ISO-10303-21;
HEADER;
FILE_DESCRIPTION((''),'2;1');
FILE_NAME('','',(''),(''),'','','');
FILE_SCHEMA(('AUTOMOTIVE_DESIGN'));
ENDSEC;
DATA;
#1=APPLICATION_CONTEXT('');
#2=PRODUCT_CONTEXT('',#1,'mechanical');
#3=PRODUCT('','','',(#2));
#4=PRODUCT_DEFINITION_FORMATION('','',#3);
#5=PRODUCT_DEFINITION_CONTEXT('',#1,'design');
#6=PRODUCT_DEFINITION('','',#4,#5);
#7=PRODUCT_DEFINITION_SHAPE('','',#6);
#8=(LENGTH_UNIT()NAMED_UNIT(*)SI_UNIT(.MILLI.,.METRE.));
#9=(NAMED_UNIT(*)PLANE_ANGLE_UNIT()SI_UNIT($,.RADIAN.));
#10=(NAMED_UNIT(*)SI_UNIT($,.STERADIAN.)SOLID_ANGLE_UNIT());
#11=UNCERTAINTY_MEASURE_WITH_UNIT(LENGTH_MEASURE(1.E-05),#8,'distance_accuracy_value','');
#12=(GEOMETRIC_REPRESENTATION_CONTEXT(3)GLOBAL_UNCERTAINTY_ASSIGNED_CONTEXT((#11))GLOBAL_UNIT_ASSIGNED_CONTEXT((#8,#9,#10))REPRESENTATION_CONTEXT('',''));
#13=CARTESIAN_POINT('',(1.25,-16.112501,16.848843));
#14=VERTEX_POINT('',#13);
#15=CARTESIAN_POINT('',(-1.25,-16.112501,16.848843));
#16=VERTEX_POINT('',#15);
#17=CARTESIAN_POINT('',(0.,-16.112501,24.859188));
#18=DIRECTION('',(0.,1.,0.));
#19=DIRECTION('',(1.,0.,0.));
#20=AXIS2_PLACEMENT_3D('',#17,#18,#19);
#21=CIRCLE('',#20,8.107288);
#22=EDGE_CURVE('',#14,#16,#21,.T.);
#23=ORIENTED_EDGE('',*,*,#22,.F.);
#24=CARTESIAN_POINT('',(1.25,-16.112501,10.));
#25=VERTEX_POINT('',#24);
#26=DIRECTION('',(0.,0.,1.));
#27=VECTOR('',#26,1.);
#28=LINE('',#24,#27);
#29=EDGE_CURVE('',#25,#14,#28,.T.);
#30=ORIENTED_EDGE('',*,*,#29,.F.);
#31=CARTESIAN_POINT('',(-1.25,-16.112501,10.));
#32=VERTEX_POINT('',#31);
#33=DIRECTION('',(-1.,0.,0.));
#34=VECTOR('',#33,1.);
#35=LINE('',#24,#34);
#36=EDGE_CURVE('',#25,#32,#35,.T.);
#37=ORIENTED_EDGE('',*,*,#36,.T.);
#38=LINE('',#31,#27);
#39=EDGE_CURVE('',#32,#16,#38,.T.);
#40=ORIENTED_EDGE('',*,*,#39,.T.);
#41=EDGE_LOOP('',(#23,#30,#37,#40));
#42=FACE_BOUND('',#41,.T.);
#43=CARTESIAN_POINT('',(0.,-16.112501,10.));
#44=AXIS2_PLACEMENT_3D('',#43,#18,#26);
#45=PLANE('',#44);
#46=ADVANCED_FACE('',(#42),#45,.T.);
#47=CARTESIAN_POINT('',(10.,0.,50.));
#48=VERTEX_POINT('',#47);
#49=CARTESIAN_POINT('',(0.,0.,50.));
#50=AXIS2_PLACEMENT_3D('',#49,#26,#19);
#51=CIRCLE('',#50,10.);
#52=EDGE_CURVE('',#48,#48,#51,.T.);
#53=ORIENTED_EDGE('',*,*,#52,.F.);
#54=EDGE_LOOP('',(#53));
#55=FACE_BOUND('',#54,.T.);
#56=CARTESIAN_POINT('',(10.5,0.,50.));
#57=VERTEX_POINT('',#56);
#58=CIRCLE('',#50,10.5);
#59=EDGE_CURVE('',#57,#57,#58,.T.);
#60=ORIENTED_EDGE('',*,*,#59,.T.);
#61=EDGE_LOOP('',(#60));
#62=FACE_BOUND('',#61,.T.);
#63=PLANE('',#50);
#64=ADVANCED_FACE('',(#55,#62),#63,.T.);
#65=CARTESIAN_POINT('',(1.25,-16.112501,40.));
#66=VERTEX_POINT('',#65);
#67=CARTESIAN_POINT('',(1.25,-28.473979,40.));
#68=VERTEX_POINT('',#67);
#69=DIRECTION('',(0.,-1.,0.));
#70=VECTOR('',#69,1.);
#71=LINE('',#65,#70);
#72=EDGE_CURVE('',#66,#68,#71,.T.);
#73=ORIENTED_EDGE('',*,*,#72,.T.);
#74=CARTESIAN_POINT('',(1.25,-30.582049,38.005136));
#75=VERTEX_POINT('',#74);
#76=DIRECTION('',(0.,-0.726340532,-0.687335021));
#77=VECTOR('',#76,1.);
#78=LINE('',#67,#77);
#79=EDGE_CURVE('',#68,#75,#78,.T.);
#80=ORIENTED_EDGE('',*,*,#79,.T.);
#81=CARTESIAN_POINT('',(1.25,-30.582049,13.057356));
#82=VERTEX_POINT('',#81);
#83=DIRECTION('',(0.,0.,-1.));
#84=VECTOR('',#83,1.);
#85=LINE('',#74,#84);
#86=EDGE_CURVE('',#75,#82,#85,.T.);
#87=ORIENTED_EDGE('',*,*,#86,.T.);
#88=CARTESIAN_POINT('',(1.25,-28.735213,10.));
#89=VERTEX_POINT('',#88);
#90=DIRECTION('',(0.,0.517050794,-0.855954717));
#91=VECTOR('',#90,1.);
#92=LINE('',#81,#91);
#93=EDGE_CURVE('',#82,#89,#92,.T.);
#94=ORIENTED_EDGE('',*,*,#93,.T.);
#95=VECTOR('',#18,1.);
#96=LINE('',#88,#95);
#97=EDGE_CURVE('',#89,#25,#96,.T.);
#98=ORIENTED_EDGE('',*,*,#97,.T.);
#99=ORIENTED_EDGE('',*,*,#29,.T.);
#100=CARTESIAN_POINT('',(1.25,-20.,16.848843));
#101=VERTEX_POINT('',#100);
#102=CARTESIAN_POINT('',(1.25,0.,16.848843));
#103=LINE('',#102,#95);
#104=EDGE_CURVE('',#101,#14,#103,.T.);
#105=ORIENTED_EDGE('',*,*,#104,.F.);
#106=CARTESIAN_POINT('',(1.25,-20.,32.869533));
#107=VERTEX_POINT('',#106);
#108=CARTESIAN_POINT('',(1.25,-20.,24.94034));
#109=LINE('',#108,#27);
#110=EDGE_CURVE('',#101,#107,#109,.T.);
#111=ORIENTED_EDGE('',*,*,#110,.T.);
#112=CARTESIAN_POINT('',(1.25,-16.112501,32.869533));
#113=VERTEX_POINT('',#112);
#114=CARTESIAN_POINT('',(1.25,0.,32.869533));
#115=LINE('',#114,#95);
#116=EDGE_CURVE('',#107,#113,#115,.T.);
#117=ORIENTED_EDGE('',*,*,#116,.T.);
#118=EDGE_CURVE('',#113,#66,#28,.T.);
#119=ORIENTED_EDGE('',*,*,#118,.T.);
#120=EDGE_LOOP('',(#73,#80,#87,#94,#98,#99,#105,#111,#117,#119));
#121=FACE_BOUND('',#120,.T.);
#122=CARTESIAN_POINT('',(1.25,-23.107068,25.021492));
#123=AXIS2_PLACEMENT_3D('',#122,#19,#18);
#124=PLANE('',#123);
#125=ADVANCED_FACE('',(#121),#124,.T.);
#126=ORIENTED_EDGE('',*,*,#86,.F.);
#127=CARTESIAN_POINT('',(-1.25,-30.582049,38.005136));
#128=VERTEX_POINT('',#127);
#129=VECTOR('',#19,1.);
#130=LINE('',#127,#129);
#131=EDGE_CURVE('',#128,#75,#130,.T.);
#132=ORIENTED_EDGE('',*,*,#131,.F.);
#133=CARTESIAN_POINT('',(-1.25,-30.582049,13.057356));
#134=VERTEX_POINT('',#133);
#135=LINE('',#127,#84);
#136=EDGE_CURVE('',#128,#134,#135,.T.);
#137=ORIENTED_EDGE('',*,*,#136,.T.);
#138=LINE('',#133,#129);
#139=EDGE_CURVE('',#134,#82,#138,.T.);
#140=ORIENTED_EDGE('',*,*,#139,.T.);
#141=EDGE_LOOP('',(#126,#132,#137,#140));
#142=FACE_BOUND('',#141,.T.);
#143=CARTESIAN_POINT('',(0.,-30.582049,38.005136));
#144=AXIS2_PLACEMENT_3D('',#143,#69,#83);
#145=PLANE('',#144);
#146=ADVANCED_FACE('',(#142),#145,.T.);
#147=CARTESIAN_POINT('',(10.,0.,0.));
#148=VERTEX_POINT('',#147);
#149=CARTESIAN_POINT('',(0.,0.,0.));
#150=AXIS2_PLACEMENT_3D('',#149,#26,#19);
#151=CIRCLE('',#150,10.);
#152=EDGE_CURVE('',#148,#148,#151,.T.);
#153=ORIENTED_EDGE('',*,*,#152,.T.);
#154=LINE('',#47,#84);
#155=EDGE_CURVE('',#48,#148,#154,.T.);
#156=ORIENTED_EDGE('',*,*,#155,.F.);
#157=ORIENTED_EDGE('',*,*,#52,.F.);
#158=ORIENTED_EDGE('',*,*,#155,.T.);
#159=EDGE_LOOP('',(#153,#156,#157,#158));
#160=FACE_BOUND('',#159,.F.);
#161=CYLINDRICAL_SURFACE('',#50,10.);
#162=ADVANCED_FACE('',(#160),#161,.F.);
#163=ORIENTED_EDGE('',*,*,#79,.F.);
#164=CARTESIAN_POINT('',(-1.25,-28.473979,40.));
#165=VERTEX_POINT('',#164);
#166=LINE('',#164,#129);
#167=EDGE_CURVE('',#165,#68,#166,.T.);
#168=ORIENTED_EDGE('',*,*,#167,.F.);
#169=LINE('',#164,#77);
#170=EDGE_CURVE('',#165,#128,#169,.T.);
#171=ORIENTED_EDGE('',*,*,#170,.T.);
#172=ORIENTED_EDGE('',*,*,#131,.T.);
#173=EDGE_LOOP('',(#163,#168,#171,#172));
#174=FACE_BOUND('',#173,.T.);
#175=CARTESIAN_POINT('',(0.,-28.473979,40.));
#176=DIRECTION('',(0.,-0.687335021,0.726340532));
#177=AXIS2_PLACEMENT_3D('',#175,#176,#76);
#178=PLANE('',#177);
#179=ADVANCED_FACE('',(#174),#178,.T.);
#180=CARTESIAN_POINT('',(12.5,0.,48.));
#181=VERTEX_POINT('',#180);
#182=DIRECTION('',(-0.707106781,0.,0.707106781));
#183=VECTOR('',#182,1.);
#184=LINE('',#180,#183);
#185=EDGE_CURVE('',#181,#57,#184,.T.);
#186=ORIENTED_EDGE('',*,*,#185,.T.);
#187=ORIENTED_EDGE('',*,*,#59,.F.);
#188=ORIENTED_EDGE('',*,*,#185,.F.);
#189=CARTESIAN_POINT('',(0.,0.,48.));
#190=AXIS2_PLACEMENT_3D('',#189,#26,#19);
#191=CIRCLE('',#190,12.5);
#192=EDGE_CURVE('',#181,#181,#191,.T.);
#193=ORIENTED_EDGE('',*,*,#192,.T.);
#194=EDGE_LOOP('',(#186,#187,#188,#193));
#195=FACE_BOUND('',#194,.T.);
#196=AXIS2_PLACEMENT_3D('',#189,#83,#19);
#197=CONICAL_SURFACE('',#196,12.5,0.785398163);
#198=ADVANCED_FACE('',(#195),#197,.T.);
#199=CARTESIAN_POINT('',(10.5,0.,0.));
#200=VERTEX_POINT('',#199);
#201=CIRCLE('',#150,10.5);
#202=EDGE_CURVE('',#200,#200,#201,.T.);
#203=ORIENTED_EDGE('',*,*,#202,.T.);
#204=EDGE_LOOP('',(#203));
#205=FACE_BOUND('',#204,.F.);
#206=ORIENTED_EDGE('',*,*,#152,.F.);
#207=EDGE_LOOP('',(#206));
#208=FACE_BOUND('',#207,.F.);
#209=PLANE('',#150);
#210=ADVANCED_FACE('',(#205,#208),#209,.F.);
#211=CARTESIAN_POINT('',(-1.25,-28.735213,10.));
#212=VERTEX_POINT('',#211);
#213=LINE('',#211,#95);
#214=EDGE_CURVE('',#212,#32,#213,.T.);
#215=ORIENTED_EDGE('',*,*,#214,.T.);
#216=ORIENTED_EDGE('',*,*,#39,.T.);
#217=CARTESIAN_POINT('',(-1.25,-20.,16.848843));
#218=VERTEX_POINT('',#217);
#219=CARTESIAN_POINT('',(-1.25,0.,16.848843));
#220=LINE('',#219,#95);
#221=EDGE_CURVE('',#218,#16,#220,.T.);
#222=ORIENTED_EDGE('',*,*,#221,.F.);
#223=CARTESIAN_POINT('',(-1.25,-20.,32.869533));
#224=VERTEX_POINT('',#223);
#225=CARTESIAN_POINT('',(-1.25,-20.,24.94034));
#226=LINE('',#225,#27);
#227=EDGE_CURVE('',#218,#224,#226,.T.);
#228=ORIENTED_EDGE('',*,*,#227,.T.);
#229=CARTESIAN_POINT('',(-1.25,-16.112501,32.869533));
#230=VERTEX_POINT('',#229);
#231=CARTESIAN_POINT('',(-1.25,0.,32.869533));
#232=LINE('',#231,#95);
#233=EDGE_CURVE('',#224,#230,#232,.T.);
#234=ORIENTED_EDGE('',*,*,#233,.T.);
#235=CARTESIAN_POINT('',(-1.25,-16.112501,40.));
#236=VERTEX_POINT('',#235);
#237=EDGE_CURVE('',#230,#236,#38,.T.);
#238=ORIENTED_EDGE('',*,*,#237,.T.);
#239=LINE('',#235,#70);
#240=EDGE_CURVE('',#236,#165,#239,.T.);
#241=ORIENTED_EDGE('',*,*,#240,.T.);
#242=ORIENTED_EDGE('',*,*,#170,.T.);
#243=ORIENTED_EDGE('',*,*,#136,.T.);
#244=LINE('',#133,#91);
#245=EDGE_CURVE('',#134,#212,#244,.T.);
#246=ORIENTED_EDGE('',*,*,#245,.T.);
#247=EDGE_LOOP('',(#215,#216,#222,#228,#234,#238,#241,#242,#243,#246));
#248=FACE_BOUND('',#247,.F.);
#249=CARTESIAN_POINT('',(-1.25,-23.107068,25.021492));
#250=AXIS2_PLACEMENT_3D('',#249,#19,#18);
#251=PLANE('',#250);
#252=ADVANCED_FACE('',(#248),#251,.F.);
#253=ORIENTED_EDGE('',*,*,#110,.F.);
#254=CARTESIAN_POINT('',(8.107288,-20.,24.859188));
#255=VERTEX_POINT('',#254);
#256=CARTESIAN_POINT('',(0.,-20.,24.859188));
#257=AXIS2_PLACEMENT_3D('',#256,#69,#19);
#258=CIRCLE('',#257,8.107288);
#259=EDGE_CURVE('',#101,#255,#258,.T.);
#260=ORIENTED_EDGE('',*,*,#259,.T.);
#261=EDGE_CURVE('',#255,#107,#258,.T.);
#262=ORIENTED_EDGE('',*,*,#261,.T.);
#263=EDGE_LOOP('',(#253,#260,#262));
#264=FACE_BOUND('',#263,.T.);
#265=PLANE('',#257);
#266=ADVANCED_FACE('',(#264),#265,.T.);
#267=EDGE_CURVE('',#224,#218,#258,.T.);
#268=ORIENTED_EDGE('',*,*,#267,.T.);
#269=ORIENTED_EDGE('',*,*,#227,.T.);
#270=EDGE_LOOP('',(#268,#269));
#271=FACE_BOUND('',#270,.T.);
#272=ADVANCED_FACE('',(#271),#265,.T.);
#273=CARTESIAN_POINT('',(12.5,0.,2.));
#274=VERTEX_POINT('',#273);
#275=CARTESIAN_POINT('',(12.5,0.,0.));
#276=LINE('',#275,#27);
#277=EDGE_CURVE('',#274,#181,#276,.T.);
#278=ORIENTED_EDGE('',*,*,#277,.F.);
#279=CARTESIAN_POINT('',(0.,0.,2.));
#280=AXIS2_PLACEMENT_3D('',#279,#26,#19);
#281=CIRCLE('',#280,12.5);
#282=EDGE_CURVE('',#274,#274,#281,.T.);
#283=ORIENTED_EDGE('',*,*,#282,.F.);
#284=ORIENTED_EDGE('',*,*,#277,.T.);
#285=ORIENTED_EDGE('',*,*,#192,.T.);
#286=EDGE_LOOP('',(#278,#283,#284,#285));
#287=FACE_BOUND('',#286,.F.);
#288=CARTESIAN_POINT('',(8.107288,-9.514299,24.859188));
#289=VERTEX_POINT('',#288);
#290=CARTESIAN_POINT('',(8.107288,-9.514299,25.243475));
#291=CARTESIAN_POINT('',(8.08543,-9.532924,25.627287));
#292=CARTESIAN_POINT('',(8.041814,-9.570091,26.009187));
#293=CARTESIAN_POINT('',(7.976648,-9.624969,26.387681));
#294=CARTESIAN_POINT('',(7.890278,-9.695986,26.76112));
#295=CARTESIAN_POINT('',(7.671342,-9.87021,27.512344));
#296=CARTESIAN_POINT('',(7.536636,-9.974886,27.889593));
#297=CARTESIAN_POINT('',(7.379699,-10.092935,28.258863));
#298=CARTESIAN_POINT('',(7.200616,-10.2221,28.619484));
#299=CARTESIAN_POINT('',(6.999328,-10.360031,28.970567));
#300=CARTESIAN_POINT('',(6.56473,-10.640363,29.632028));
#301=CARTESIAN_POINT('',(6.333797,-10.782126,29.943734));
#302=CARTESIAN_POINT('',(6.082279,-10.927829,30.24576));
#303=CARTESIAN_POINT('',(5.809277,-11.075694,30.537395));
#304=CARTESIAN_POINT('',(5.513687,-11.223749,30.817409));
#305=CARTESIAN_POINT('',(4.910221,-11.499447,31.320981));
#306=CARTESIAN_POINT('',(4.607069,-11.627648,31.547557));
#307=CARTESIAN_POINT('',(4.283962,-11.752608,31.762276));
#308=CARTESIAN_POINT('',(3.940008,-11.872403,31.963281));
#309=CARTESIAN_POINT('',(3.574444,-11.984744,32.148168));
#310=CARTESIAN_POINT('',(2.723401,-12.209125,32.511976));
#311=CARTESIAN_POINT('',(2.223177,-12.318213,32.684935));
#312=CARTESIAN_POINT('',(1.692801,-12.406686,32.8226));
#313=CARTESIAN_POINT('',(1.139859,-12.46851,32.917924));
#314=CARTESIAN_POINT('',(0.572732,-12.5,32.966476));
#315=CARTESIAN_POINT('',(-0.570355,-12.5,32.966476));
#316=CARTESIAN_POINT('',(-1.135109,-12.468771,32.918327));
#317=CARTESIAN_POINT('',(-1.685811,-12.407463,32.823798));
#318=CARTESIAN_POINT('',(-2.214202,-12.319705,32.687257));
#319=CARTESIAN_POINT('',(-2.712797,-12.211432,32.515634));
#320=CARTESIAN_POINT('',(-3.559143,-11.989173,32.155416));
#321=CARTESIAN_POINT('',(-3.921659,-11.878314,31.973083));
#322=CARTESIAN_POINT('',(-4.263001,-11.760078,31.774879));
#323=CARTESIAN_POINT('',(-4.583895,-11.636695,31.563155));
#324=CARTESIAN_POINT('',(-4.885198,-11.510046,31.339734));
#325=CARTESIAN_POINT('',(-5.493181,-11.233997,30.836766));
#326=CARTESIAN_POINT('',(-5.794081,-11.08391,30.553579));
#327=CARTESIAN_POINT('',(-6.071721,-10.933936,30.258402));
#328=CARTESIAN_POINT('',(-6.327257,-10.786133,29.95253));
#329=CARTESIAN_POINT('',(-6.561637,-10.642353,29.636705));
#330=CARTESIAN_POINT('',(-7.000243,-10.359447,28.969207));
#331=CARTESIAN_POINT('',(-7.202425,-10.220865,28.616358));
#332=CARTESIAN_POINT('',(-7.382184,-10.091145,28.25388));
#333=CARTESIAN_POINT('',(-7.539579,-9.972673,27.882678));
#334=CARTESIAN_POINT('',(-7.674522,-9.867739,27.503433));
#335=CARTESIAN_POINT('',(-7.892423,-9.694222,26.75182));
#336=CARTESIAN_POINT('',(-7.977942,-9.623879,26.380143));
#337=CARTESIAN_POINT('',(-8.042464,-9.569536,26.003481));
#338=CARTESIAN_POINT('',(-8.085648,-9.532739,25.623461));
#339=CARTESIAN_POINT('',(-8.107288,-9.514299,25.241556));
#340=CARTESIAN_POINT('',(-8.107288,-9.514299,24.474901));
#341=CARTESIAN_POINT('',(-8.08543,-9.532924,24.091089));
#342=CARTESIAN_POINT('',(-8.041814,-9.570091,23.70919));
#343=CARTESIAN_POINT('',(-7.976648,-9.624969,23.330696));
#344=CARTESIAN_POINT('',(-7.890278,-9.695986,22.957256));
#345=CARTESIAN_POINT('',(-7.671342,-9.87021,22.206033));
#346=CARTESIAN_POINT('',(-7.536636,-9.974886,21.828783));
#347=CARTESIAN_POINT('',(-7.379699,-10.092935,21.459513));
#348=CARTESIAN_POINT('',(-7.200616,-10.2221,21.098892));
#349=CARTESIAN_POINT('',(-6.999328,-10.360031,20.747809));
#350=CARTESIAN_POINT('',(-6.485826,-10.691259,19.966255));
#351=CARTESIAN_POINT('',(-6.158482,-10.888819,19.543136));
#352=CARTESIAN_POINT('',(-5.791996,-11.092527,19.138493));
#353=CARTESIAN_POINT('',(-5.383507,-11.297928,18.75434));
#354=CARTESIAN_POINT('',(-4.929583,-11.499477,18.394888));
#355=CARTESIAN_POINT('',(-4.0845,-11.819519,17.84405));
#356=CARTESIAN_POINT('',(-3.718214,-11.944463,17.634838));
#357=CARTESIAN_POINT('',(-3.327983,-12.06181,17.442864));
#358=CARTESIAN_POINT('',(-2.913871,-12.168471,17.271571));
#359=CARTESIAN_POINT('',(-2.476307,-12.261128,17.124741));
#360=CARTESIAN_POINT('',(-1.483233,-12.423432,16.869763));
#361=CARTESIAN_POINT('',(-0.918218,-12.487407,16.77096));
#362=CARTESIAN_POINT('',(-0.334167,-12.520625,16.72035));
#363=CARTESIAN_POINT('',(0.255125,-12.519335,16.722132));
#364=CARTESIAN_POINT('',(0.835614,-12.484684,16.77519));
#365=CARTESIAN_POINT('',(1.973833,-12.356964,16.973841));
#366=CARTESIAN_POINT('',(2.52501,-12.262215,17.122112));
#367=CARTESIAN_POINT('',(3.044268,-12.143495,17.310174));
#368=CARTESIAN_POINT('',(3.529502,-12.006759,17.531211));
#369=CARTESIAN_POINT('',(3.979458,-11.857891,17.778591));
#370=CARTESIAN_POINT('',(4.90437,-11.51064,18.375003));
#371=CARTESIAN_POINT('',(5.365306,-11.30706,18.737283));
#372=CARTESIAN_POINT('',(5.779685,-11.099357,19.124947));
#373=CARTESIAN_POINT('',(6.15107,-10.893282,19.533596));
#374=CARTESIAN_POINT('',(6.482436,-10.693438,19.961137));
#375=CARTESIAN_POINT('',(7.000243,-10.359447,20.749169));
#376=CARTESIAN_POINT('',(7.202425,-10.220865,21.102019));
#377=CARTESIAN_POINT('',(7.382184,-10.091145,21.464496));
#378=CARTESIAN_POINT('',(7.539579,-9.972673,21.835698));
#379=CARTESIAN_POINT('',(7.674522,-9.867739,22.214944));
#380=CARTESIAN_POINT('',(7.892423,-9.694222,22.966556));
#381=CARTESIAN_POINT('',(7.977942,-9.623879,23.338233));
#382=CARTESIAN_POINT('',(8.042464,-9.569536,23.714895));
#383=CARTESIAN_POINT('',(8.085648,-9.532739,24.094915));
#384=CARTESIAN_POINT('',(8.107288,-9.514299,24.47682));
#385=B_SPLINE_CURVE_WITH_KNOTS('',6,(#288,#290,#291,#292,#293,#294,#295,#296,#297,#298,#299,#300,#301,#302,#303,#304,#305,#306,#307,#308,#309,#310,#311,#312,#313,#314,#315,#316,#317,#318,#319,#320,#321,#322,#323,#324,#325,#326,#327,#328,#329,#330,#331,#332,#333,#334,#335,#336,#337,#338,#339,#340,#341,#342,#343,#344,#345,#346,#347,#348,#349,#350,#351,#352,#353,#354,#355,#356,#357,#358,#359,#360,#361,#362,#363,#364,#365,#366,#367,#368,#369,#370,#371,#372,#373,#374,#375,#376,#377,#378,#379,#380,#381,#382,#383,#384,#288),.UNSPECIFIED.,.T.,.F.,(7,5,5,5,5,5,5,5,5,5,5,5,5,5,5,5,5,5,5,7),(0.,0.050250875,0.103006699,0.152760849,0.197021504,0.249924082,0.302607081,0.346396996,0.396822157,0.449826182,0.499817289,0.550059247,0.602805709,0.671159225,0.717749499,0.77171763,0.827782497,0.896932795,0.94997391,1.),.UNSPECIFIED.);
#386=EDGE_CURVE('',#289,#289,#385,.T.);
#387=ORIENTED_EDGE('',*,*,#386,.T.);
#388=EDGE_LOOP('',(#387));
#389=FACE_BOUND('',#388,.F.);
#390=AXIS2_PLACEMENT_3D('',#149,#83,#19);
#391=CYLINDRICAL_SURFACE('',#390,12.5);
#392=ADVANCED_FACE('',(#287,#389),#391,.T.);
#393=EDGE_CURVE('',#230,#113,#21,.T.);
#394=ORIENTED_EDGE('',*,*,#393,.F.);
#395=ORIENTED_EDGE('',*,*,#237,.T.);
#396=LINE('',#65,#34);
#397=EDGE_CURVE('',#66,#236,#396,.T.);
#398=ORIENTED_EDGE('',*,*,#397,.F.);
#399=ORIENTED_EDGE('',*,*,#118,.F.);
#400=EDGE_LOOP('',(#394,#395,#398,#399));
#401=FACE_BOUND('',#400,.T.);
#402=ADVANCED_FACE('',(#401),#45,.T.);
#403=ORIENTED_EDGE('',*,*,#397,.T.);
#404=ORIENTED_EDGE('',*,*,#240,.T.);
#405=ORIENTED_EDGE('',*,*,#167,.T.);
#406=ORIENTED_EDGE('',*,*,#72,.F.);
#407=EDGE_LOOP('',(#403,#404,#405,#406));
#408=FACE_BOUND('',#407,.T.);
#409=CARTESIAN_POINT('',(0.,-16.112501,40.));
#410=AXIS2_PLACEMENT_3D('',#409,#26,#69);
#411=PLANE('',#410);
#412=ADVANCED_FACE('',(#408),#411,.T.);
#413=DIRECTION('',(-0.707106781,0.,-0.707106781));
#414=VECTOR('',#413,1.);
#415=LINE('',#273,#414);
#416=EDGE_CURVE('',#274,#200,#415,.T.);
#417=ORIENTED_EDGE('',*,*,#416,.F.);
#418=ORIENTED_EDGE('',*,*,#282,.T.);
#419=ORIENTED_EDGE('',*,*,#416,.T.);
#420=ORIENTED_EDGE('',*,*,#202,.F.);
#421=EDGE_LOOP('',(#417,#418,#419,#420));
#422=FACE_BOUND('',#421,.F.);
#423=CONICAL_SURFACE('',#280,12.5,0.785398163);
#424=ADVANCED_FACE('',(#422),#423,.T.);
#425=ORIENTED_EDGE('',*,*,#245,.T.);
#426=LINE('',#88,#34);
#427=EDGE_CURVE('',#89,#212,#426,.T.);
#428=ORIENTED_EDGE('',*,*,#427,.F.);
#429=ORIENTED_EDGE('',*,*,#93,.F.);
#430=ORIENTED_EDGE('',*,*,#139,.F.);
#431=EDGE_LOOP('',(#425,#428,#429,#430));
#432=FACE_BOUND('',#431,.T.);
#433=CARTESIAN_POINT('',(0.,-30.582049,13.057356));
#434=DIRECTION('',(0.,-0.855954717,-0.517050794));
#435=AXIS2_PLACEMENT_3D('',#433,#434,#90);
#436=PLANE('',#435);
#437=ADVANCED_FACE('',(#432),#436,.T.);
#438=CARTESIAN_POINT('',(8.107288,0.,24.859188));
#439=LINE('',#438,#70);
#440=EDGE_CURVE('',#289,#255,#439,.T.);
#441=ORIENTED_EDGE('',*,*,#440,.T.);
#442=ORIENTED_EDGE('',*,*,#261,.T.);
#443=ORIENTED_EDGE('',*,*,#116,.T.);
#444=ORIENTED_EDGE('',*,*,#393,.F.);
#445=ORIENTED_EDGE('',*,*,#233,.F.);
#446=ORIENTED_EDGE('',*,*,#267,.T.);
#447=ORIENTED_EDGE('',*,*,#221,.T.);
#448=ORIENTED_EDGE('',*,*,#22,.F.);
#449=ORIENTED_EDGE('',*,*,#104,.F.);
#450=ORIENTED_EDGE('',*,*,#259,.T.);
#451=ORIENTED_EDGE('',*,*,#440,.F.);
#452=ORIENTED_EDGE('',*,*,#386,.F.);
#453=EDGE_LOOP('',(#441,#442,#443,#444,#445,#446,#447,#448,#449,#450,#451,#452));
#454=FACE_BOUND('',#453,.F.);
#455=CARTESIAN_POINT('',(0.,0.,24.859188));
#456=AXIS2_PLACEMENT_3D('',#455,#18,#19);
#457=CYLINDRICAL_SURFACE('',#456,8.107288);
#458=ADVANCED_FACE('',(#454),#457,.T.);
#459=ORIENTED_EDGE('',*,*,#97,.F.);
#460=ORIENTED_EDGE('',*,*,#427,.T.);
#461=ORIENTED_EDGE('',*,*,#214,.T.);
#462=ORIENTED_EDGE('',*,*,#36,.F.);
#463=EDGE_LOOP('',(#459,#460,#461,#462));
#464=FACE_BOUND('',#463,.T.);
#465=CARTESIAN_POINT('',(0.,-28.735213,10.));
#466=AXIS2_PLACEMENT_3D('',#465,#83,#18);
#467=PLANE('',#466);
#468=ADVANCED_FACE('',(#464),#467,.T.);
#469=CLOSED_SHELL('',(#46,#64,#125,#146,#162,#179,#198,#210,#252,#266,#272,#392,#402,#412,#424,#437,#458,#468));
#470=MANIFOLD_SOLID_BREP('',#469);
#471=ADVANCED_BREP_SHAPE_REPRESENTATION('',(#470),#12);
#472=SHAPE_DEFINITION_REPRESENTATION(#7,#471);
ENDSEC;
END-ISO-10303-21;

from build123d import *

# Parameters (mm, degrees)
F0_R     = 12.5
F1_DEPTH = 50
F2_SIZE  = 2
F3_R     = 8.1072881944
F4_DEPTH = 20
F5_R     = 10
F6_DEPTH = 50.001
F8_DEPTH = 1.25


with BuildPart() as f1:
    # F0 (on Top) → F1 (new body)
    with BuildSketch(Plane.XY):
        Circle(F0_R)
    extrude(amount=F1_DEPTH)

    # F2
    f2_edges = [f1.edges().sort_by_distance(p)[0] for p in [
        (-12.5, 0, 50),
        (-12.5, 0, 0),
    ]]
    chamfer(f2_edges, length=F2_SIZE)

    # F3 (on Front) → F4 (join)
    with BuildSketch(Plane.XZ):
        with Locations((0, 24.8591881245)):
            Circle(F3_R)
    extrude(amount=F4_DEPTH)

    # F5 (on face) → F6 (cut, through all)
    with BuildSketch(Plane.XY.offset(50)):
        Circle(F5_R)
    extrude(amount=-F6_DEPTH, mode=Mode.SUBTRACT)

    # F7 (on Right) → F8 (join, symmetric)
    with BuildSketch(Plane.YZ):
        Polygon((-16.112501399, 40), (-28.4739788622, 40), (-30.5820492643, 38.0051359534), (-30.5820492643, 13.057355769), (-28.7352129817, 10), (-16.112501399, 10), align=None)
    extrude(amount=F8_DEPTH, both=True)


solid = f1.part
